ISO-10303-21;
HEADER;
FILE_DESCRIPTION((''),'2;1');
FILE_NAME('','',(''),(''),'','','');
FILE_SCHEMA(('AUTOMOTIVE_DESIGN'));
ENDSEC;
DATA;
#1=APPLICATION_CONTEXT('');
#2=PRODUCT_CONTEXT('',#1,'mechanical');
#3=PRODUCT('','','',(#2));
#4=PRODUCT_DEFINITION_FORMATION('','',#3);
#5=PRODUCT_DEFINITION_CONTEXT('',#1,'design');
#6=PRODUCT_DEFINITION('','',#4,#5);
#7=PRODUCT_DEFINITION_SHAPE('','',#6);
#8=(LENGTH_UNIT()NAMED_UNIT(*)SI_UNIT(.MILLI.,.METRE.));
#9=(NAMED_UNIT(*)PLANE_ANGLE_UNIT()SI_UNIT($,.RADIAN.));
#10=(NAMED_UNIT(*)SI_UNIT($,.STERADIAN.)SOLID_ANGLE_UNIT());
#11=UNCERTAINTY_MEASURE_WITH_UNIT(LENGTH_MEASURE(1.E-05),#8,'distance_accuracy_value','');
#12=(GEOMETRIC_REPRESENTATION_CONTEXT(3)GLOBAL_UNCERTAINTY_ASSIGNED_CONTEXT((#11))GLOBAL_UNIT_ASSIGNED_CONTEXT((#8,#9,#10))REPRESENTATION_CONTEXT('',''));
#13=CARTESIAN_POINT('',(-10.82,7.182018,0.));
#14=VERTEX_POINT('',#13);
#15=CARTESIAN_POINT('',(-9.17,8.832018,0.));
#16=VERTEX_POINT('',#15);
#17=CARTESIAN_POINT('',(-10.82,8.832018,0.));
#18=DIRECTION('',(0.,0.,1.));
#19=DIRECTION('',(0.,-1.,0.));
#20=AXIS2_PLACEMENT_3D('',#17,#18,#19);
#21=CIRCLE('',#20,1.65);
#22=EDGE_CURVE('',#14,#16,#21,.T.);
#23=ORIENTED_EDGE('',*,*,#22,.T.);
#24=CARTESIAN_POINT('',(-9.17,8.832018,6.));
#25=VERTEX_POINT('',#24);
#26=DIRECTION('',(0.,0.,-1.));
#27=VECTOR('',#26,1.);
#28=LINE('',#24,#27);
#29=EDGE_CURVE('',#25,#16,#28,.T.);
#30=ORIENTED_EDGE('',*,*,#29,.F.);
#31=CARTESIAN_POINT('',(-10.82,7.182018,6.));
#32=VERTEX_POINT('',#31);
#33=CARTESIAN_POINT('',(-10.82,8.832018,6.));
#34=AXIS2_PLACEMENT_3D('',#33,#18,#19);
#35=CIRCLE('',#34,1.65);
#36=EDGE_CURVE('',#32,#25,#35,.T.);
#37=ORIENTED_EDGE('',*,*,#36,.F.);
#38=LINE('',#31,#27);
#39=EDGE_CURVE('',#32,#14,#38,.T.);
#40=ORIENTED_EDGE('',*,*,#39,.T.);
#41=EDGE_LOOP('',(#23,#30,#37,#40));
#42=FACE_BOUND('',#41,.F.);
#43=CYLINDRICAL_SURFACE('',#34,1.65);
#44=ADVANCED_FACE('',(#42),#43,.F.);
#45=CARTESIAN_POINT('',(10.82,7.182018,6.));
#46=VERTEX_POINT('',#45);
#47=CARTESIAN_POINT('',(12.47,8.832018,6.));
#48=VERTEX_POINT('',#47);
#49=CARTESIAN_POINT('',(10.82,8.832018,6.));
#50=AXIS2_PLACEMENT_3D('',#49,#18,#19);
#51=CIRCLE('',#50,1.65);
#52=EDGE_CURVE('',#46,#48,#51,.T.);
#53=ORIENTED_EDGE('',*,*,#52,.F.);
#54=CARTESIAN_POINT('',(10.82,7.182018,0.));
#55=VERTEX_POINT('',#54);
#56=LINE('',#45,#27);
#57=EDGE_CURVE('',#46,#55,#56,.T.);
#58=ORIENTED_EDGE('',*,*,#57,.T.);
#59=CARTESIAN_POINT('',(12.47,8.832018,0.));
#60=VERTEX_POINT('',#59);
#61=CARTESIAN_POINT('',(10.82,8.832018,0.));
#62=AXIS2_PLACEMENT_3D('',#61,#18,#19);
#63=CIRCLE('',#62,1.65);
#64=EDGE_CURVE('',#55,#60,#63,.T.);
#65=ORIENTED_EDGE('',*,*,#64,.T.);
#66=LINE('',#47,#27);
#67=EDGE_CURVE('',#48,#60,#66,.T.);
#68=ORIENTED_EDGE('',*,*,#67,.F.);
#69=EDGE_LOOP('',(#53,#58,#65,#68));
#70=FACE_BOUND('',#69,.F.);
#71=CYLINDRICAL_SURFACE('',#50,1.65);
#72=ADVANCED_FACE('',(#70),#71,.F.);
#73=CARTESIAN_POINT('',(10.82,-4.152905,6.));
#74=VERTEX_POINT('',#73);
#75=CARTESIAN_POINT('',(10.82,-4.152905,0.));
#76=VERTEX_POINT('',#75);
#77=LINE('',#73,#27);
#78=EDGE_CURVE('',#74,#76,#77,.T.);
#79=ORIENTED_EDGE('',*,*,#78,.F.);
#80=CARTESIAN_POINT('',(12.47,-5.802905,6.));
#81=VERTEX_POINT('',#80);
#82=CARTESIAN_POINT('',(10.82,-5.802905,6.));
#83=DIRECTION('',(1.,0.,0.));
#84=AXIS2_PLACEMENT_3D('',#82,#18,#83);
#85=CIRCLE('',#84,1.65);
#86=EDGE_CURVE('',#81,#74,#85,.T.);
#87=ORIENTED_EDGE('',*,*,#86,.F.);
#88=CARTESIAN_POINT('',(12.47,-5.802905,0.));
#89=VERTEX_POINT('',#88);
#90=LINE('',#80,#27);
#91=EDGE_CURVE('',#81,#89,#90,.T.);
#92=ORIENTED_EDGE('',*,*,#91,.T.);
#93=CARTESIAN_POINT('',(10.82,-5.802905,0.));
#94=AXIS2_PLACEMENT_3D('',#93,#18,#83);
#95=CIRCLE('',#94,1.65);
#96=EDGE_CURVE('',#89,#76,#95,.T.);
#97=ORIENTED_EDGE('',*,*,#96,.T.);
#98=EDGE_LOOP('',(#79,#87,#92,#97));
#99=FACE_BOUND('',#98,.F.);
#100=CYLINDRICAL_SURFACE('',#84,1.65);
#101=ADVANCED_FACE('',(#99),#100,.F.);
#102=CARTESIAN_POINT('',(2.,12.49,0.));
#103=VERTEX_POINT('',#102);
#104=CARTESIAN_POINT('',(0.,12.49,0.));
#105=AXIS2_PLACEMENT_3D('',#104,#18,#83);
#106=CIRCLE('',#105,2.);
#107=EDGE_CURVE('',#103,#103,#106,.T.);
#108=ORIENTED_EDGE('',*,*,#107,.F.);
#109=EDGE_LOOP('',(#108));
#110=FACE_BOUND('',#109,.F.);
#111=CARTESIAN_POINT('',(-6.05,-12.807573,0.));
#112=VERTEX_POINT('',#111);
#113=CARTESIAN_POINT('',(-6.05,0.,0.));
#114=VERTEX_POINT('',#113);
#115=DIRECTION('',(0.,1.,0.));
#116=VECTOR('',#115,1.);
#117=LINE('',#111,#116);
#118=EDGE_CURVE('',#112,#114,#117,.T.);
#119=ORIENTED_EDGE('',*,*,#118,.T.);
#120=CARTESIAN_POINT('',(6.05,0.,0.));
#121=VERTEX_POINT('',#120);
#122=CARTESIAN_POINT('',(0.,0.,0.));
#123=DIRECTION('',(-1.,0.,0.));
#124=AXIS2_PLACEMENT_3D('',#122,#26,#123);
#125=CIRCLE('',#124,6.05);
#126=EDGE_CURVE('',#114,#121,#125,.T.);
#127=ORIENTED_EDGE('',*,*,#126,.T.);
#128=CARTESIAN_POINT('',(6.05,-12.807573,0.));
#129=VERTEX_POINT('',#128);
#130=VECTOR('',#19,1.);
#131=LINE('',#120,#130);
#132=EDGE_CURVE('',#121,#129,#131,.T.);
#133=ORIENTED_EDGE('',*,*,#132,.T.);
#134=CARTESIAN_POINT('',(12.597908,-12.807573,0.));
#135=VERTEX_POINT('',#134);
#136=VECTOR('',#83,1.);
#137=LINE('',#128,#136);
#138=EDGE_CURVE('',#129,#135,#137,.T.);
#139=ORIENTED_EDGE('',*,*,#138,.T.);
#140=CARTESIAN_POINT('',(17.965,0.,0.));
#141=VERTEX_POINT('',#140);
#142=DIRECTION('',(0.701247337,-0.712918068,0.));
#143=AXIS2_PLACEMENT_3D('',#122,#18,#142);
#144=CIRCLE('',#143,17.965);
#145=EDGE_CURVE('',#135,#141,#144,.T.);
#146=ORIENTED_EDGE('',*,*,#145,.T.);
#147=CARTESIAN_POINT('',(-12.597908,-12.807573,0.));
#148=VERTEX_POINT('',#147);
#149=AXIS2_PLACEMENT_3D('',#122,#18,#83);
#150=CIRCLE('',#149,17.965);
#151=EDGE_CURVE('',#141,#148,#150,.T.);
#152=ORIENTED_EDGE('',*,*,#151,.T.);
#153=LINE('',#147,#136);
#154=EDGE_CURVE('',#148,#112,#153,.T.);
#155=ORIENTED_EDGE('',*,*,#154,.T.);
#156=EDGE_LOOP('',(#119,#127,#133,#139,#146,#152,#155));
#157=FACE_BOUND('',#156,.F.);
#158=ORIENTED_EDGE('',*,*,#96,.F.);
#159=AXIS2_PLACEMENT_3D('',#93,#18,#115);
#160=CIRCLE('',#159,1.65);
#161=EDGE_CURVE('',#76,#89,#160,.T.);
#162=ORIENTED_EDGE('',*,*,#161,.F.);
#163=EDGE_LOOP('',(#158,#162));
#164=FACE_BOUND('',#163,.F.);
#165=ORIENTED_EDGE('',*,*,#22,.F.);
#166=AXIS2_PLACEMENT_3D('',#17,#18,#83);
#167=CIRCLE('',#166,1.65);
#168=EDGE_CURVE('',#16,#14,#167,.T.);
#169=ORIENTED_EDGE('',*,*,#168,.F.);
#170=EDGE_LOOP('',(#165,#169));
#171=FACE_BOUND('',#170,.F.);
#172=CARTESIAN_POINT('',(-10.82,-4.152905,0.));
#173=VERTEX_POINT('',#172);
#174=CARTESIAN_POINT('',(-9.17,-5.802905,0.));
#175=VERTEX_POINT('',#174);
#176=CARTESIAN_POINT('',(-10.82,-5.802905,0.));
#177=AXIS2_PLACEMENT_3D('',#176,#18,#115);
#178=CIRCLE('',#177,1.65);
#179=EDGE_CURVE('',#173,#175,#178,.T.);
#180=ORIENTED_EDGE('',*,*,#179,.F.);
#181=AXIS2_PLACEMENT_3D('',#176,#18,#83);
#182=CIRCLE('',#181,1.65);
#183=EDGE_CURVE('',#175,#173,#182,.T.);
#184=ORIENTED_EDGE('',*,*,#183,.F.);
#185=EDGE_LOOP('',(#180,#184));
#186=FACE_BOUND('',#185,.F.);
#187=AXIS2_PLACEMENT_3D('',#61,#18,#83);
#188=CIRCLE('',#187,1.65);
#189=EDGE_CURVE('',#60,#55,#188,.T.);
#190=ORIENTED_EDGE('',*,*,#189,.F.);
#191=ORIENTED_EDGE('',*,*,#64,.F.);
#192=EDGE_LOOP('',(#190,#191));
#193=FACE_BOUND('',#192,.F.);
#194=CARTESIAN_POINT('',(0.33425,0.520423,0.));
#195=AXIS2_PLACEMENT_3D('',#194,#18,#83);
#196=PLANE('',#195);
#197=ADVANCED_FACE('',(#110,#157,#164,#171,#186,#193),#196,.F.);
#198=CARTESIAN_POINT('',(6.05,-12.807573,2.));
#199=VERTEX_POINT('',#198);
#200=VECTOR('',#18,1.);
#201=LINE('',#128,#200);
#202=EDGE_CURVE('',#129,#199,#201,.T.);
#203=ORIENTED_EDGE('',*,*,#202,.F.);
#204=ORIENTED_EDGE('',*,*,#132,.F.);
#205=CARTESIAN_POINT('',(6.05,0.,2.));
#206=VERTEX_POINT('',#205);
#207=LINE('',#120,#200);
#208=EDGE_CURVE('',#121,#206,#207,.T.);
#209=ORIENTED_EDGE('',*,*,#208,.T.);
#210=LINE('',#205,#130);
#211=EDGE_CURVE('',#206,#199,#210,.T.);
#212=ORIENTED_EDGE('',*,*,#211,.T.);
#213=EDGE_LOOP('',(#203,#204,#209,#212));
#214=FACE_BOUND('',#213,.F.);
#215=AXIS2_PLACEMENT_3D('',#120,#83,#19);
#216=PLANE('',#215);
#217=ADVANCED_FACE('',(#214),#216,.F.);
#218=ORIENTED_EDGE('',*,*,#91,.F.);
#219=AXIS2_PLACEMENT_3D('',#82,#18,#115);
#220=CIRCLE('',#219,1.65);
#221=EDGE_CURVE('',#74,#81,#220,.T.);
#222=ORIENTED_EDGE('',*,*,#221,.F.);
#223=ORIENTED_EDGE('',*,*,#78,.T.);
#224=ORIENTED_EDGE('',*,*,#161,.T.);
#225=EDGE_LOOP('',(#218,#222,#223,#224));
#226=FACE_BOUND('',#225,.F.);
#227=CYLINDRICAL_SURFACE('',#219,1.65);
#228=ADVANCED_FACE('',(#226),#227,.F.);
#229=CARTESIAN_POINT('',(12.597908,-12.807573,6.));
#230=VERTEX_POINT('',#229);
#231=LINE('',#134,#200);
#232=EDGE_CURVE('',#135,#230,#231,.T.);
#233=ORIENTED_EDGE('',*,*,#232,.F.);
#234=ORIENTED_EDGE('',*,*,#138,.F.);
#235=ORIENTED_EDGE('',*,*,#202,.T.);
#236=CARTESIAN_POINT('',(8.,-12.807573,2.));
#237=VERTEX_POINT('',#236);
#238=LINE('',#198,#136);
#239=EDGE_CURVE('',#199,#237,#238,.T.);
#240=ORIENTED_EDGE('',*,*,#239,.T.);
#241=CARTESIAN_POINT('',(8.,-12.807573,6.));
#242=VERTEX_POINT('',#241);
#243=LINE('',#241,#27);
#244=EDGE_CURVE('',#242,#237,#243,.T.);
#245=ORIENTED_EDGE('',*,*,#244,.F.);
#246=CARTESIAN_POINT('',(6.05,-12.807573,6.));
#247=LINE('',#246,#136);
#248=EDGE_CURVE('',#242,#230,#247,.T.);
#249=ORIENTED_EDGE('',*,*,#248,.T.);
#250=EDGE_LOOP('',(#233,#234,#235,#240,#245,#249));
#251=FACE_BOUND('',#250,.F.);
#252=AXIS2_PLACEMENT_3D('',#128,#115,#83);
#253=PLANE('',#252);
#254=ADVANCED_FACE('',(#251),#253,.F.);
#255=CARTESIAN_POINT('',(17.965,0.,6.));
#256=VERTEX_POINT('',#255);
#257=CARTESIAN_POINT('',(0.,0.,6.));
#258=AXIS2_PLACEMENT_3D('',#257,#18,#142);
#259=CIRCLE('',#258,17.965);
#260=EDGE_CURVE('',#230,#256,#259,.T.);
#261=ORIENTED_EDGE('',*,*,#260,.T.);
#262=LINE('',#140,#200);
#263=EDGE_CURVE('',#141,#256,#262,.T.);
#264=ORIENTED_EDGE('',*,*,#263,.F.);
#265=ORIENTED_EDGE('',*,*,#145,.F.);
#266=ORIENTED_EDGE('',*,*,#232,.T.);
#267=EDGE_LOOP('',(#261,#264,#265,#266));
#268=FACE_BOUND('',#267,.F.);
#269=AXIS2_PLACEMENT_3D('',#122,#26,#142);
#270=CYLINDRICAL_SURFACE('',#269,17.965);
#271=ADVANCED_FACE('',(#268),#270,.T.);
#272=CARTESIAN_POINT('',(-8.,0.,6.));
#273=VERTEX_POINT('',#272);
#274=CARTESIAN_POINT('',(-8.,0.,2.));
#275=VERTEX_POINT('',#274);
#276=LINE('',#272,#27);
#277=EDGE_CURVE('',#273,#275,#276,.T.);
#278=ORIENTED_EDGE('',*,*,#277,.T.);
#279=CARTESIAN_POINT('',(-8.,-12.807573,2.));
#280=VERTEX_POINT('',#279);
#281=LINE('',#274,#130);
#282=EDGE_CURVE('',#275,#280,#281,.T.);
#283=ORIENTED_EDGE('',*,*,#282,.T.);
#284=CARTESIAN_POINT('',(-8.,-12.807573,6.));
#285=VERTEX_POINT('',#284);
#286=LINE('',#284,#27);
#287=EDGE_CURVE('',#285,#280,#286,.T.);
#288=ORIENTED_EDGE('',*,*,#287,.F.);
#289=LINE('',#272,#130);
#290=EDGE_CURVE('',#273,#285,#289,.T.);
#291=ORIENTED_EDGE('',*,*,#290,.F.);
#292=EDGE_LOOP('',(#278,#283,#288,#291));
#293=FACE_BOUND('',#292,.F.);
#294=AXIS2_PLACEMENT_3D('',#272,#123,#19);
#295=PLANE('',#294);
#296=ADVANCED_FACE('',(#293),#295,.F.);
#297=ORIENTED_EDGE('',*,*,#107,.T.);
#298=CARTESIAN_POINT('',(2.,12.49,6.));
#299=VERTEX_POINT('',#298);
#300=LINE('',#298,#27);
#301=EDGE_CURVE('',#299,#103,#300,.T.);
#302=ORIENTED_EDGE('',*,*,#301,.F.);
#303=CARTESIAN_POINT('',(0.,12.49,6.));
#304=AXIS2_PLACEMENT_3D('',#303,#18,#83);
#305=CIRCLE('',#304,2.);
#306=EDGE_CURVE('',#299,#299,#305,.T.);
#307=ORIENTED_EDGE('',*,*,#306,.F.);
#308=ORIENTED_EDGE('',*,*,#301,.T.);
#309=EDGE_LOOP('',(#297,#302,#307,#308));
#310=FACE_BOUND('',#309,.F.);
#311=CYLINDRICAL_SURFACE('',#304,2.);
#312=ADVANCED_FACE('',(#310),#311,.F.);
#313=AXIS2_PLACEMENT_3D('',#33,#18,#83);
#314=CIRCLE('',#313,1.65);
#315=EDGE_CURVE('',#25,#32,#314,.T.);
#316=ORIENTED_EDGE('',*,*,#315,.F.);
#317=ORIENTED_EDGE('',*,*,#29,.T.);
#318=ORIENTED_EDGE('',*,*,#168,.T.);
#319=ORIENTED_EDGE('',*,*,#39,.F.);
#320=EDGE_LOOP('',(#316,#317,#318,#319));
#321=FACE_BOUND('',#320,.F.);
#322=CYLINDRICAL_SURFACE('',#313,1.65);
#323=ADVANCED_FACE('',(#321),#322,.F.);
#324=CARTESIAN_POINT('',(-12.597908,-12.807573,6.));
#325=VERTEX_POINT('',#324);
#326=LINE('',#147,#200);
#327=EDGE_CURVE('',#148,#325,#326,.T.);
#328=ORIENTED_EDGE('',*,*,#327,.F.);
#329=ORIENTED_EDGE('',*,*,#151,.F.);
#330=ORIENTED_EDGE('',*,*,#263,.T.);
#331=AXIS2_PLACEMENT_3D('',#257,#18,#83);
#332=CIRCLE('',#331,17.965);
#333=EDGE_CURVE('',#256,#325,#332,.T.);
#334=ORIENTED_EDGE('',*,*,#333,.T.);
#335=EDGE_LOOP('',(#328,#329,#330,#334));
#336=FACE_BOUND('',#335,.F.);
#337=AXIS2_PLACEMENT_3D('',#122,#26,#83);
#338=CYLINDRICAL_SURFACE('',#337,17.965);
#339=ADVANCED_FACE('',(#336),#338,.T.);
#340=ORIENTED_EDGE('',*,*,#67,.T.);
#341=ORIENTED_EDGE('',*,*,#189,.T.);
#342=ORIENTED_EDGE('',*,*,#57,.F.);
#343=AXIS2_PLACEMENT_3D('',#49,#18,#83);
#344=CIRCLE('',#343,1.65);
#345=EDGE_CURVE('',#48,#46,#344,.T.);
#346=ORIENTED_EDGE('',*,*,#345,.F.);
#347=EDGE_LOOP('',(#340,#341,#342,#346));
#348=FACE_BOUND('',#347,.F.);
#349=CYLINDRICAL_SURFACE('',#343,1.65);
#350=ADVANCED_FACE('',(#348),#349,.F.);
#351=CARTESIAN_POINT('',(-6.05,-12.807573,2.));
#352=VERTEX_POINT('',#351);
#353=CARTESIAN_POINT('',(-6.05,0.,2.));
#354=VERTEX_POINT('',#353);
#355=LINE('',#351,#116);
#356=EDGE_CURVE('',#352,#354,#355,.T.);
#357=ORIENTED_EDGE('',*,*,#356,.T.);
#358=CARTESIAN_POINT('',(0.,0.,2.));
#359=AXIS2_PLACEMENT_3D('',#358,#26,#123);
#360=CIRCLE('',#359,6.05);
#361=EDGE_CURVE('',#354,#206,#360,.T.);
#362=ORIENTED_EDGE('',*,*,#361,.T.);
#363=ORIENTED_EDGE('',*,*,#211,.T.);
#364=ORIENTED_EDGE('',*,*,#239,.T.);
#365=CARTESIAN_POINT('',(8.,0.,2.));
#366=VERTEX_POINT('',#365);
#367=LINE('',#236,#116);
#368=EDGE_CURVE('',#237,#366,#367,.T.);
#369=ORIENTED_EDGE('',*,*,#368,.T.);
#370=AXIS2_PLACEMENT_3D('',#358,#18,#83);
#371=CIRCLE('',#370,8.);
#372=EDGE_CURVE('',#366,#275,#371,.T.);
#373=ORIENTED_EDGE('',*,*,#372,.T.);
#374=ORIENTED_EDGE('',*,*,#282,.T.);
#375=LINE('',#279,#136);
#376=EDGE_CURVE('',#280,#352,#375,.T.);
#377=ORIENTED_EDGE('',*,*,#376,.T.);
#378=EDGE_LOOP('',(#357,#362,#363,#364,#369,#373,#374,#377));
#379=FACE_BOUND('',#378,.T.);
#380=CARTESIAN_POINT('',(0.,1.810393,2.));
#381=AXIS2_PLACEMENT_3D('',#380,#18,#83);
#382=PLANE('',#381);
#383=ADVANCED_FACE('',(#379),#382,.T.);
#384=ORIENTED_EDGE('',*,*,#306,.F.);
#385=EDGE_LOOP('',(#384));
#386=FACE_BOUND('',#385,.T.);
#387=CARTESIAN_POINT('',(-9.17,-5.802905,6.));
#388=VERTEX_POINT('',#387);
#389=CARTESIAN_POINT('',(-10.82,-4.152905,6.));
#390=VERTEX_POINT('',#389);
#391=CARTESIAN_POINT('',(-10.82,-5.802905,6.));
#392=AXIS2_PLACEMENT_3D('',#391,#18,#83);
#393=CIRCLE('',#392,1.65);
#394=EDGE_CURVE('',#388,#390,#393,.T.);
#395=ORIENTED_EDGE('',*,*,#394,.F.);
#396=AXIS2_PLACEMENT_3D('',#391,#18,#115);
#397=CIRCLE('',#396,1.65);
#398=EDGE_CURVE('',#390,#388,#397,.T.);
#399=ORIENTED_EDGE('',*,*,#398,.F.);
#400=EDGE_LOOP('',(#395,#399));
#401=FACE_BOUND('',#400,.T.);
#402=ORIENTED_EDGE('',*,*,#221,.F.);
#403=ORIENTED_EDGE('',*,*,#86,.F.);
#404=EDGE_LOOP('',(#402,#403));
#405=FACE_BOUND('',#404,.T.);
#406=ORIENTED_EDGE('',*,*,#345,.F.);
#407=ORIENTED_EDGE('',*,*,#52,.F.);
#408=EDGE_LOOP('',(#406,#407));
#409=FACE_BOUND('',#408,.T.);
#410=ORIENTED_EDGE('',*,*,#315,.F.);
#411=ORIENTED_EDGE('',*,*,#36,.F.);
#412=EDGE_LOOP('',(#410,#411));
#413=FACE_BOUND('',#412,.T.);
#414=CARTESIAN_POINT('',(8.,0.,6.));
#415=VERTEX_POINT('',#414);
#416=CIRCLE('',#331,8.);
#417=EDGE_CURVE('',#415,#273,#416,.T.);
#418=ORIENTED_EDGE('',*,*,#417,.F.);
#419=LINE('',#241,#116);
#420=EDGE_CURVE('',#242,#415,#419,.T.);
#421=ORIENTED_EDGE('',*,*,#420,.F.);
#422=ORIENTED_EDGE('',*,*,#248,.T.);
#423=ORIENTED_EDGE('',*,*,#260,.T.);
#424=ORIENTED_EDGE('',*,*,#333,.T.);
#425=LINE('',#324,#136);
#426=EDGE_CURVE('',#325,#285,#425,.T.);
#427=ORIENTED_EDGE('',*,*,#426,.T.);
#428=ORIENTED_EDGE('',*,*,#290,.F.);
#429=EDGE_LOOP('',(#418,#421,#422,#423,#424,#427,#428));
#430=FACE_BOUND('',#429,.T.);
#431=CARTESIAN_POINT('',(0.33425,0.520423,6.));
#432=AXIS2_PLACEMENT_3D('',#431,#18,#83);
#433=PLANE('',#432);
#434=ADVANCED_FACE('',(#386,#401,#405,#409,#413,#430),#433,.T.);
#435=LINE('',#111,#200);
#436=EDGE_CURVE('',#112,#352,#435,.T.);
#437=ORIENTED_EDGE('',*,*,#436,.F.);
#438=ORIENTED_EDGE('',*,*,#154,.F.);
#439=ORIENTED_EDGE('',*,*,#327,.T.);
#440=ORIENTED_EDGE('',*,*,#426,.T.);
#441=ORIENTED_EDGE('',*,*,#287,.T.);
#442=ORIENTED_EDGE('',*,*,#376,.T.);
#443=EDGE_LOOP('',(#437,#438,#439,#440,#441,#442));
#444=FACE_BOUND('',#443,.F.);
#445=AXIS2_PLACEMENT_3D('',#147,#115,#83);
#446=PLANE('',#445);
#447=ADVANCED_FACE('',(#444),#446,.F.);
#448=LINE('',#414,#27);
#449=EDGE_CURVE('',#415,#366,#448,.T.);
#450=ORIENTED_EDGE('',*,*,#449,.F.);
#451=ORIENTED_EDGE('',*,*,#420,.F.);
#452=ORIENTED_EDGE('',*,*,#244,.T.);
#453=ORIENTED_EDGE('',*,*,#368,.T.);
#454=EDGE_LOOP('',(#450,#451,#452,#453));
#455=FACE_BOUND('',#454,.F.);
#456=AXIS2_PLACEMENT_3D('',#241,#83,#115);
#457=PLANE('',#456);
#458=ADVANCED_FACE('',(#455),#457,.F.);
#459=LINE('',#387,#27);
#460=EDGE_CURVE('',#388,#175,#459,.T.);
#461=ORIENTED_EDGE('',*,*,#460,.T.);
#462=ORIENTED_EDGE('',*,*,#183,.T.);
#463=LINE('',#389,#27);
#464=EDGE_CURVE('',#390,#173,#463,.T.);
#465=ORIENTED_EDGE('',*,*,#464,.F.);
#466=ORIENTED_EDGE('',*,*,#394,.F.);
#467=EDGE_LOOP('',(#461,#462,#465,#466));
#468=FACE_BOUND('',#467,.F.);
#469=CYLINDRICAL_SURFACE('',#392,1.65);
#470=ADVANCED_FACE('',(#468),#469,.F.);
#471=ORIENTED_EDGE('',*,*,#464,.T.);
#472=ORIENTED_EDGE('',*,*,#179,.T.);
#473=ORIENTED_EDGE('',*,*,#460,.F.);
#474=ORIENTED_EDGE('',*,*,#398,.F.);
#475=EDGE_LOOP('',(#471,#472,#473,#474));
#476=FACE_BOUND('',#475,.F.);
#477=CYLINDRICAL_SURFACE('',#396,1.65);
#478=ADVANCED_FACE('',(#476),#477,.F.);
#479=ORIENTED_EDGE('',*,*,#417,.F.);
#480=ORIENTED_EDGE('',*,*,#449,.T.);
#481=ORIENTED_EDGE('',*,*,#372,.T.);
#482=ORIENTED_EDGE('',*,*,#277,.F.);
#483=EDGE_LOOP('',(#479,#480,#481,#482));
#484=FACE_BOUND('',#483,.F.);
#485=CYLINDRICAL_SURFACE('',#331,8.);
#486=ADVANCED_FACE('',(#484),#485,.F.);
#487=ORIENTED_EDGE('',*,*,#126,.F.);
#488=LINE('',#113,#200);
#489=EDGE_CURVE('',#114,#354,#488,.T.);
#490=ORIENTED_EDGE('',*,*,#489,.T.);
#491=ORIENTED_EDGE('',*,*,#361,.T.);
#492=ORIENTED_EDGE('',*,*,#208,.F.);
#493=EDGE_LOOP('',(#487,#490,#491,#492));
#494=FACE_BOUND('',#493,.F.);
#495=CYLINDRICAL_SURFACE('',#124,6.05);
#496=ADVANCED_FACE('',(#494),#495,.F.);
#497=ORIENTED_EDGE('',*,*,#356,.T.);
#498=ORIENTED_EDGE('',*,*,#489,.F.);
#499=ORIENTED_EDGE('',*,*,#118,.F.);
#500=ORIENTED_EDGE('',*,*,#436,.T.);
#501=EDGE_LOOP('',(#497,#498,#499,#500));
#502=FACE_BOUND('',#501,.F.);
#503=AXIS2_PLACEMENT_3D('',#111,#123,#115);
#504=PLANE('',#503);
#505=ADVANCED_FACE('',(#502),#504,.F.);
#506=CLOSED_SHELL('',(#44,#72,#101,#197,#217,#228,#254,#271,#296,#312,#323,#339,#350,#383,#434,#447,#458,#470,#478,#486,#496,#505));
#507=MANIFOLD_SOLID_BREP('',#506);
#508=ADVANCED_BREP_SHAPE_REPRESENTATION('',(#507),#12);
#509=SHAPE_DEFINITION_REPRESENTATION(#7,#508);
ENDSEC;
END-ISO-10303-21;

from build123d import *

# Parameters (mm, degrees)
F1_DEPTH = 6
F2_R     = 2
F3_DEPTH = 25.4
F5_DEPTH = 4


with BuildPart() as f1:
    # F0 (on Top) → F1 (new body)
    with BuildSketch(Plane.XY):
        with BuildLine():
            ThreePointArc((12.5979084153, -12.807573094), (16.5689868381, -6.9433349451), (17.965, 0))
            ThreePointArc((17.965, 0), (-6.9433349451, 16.5689868381), (-12.5979084153, -12.807573094))
            Line((-12.5979084153, -12.807573094), (-6.05, -12.807573094))
            Line((-6.05, -12.807573094), (-6.05, 0))
            ThreePointArc((-6.05, 0), (0, 6.05), (6.05, 0))
            Line((6.05, 0), (6.05, -12.807573094))
            Line((6.05, -12.807573094), (12.5979084153, -12.807573094))
        make_face()
    extrude(amount=F1_DEPTH)

    # F2 (on face) → F3 (cut)
    with BuildSketch(Plane.XY.offset(6)):
        with Locations((0, 12.49)):
            Circle(F2_R)
        with BuildLine():
            ThreePointArc((-10.82, 7.1820178571), (-9.653273811, 7.6652916681), (-9.17, 8.8320178571))
            ThreePointArc((-9.17, 8.8320178571), (-11.986726189, 9.998744046), (-10.82, 7.1820178571))
        make_face()
        with BuildLine():
            ThreePointArc((-9.17, -5.8029047803), (-9.653273811, -4.6361785914), (-10.82, -4.1529047803))
            ThreePointArc((-10.82, -4.1529047803), (-11.986726189, -6.9696309693), (-9.17, -5.8029047803))
        make_face()
        with BuildLine():
            ThreePointArc((10.82, 7.1820178571), (11.986726189, 7.6652916681), (12.47, 8.8320178571))
            ThreePointArc((12.47, 8.8320178571), (9.653273811, 9.998744046), (10.82, 7.1820178571))
        make_face()
        with BuildLine():
            ThreePointArc((12.47, -5.8029047803), (11.986726189, -4.6361785914), (10.82, -4.1529047803))
            ThreePointArc((10.82, -4.1529047803), (9.653273811, -6.9696309693), (12.47, -5.8029047803))
        make_face()
    extrude(amount=-F3_DEPTH, mode=Mode.SUBTRACT)

    # F4 (on face) → F5 (cut)
    with BuildSketch(Plane.XY.offset(6)):
        with BuildLine():
            ThreePointArc((6.05, -5.2342621256), (7.4966659256, -2.7928480088), (8, 0))
            ThreePointArc((8, 0), (0, 8), (-8, 0))
            ThreePointArc((-8, 0), (-7.4966659256, -2.7928480088), (-6.05, -5.2342621256))
            Line((-6.05, -5.2342621256), (-6.05, 0))
            ThreePointArc((-6.05, 0), (0, 6.05), (6.05, 0))
            Line((6.05, 0), (6.05, -5.2342621256))
        make_face()
        with BuildLine():
            Line((8, -12.807573094), (8, 0))
            ThreePointArc((8, 0), (7.4966659256, -2.7928480088), (6.05, -5.2342621256))
            Line((6.05, -5.2342621256), (6.05, -12.807573094))
            Line((6.05, -12.807573094), (8, -12.807573094))
        make_face()
        with BuildLine():
            ThreePointArc((-6.05, -5.2342621256), (-7.4966659256, -2.7928480088), (-8, 0))
            Line((-8, 0), (-8, -12.807573094))
            Line((-8, -12.807573094), (-6.05, -12.807573094))
            Line((-6.05, -12.807573094), (-6.05, -5.2342621256))
        make_face()
        with BuildLine():
            ThreePointArc((-6.05, -5.2342621256), (0, -8), (6.05, -5.2342621256))
            Line((6.05, -5.2342621256), (6.05, 0))
            ThreePointArc((6.05, 0), (0, 6.05), (-6.05, 0))
            Line((-6.05, 0), (-6.05, -5.2342621256))
        make_face()
    extrude(amount=-F5_DEPTH, mode=Mode.SUBTRACT)


solid = f1.part
